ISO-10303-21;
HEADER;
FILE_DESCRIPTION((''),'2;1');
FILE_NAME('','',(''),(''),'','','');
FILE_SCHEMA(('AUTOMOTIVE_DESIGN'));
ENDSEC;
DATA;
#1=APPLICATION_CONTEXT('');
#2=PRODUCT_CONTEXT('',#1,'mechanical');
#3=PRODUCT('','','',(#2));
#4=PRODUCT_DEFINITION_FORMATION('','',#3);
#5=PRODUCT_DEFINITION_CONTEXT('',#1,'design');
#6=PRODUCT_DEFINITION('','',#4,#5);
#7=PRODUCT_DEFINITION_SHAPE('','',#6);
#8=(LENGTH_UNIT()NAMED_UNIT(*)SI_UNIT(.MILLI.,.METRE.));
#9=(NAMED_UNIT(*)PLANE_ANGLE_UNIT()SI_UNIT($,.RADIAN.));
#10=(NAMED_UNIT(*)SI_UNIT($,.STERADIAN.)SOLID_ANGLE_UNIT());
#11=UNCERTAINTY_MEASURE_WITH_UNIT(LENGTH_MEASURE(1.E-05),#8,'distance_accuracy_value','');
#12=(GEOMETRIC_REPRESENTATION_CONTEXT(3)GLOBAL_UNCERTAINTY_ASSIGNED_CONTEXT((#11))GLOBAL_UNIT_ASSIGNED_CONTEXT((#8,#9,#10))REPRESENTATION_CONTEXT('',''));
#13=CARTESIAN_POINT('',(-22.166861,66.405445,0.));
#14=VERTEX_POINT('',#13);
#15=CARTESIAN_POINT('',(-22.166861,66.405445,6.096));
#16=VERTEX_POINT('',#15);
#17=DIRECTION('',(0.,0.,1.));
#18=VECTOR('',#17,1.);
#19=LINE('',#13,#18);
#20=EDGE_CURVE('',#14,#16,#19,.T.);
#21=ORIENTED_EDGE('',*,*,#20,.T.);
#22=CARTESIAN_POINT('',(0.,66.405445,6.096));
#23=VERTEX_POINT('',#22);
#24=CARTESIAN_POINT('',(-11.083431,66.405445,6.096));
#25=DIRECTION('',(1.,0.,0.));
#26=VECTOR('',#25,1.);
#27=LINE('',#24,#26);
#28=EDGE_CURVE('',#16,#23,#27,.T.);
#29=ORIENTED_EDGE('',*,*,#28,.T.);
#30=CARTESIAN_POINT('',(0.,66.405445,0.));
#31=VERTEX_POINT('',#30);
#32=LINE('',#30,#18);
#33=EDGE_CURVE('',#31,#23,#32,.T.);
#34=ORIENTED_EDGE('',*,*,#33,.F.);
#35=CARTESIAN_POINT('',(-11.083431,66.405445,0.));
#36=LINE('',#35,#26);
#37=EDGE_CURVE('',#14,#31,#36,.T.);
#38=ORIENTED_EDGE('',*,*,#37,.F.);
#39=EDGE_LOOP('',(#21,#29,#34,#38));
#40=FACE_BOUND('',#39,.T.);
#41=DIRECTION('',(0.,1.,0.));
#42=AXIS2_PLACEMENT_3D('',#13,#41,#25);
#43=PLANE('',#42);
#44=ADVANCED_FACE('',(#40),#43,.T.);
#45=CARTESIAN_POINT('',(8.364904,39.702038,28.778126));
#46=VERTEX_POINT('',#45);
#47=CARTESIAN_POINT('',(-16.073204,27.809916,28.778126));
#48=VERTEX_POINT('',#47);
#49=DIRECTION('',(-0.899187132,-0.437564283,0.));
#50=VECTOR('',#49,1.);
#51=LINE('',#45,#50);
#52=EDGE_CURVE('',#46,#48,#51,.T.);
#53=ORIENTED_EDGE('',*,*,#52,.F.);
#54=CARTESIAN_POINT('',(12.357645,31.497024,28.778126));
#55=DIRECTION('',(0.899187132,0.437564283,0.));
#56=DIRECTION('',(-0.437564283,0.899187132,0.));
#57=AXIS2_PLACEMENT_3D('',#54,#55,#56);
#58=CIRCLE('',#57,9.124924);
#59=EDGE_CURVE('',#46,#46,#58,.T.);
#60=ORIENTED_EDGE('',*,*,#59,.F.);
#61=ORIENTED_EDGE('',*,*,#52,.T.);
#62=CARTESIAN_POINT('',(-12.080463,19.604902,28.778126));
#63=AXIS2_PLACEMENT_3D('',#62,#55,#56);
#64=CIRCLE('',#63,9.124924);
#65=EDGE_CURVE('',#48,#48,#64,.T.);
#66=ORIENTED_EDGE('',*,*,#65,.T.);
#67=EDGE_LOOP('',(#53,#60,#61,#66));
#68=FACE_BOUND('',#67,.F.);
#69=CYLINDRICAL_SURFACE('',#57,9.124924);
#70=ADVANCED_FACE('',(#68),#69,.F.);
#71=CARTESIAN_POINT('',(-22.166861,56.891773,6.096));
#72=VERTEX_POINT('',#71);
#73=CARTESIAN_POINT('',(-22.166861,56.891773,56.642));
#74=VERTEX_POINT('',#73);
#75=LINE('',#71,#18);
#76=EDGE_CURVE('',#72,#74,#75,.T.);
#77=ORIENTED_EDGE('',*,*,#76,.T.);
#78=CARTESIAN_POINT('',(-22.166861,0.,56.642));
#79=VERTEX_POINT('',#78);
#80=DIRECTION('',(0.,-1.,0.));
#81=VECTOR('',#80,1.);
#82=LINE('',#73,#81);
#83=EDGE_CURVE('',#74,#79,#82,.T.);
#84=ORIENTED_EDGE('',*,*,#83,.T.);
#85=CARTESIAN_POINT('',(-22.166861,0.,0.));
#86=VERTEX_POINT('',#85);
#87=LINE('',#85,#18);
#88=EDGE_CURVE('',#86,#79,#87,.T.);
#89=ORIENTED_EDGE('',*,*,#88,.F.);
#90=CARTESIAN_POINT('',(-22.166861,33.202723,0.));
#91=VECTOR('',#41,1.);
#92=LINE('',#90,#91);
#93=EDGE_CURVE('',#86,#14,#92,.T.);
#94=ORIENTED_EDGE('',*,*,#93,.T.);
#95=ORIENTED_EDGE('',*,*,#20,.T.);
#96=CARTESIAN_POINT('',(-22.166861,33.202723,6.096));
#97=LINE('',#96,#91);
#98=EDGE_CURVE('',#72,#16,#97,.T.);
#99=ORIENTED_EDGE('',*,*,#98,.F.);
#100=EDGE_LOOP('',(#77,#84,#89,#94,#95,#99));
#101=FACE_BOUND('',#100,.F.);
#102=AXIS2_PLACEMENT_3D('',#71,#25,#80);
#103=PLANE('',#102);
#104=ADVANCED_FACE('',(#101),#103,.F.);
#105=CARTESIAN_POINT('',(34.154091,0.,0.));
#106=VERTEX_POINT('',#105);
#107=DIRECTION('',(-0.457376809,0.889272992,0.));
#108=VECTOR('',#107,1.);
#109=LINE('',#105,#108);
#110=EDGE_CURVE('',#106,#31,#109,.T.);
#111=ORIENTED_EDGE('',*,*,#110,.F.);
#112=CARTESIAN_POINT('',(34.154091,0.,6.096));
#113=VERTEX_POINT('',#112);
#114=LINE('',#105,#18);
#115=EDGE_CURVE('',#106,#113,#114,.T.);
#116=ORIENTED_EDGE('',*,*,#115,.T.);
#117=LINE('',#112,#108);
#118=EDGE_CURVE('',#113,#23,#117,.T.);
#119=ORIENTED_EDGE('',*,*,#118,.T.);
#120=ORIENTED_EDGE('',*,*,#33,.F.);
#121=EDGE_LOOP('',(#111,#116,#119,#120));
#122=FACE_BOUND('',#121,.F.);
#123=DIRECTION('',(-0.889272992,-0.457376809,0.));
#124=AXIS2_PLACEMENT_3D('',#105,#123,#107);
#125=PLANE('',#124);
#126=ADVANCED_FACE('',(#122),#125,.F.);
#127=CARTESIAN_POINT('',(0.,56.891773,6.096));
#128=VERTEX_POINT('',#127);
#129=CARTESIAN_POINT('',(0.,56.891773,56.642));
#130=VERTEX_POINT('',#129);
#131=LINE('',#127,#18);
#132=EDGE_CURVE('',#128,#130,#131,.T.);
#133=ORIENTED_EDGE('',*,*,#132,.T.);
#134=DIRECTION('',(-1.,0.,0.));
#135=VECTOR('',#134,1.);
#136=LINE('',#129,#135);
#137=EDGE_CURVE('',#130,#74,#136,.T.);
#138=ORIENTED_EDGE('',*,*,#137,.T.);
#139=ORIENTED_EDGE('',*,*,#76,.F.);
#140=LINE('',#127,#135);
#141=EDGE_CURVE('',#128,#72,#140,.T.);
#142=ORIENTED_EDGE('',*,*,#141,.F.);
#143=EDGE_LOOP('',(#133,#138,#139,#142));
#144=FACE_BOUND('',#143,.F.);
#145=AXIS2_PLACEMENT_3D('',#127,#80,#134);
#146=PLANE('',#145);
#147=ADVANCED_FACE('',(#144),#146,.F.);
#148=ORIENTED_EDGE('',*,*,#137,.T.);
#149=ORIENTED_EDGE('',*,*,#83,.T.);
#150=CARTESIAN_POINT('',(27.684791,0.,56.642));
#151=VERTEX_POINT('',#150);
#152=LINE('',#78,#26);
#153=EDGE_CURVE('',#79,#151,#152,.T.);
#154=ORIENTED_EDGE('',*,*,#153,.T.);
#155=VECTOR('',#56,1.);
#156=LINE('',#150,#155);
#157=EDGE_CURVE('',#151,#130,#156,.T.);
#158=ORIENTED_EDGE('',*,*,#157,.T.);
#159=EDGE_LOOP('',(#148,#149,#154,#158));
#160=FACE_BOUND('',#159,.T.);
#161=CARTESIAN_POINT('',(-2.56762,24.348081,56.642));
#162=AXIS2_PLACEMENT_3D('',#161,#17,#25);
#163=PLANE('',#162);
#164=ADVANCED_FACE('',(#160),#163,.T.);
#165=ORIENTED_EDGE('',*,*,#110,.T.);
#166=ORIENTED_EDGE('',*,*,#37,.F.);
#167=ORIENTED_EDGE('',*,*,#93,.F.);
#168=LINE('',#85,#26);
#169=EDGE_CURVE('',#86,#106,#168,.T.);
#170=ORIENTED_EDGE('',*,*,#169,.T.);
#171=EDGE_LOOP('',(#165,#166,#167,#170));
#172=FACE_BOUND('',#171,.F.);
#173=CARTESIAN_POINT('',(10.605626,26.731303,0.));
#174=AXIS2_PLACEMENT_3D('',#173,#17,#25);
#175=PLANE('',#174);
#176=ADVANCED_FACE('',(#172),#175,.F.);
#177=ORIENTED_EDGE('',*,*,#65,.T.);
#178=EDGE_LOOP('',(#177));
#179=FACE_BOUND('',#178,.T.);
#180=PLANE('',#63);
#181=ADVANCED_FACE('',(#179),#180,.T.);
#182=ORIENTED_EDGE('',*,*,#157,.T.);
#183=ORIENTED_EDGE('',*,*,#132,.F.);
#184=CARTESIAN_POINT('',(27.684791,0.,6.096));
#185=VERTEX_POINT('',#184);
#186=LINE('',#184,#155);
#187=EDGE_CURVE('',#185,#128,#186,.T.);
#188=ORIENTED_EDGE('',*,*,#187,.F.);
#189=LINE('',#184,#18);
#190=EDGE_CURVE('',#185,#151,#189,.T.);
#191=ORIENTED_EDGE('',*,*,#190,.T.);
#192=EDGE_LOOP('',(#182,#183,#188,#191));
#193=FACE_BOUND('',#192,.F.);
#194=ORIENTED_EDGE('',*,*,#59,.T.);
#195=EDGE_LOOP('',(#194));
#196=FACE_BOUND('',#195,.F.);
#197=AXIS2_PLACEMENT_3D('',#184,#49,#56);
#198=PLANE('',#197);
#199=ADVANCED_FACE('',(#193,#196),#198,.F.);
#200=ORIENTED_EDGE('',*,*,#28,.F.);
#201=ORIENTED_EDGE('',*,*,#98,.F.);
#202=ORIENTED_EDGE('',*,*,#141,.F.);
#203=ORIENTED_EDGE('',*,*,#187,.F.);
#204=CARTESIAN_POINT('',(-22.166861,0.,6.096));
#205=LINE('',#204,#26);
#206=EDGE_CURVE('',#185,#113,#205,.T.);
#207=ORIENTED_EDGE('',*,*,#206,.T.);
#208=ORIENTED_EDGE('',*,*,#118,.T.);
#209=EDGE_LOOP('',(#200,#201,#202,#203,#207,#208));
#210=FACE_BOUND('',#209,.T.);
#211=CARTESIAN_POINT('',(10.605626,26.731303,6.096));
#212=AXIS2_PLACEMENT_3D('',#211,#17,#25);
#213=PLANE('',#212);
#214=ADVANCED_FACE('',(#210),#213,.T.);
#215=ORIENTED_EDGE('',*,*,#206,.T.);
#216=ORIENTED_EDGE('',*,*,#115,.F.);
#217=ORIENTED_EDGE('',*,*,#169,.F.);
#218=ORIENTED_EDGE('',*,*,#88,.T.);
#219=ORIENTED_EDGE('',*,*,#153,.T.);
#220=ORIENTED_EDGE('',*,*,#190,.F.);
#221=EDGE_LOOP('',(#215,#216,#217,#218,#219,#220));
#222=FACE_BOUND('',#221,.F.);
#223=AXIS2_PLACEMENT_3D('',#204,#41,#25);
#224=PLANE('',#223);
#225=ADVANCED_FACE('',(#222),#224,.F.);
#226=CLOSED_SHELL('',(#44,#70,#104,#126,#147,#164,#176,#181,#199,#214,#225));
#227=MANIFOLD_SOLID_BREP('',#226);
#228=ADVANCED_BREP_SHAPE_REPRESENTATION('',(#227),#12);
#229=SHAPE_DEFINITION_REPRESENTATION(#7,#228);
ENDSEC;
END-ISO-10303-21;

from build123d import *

# Parameters (mm, degrees)
F0_W     = 22.1668612212
F0_H     = 66.4054453373
F1_DEPTH = 6.096
F3_DEPTH = 50.546
F4_R     = 9.1249243662
F5_DEPTH = 27.178


with BuildPart() as f1:
    # F0 (on Top) → F1 (new body)
    with BuildSketch(Plane.XY):
        Polygon((0, 66.4054453373), (0, 0), (34.1540910304, 0), align=None)
        with Locations((-11.0834306106, 33.2027226686)):
            Rectangle(F0_W, F0_H)
    extrude(amount=F1_DEPTH)

    # F2 (on face) → F3 (join)
    with BuildSketch(Plane.XY.offset(6.096)):
        Polygon((0, 56.8917728961), (-22.1668612212, 56.8917728961), (-22.1668612212, 0), (27.6847910136, 0), align=None)
    extrude(amount=F3_DEPTH)

    # F4 (on face) → F5 (cut)
    with BuildSketch(Plane(origin=(22.3841916607, 10.892641178, 0), x_dir=(-0.4375642832, 0.8991871318, 0), z_dir=(0.8991871318, 0.4375642832, 0))):
        with Locations((22.9144543409, 28.7781264633)):
            Circle(F4_R)
    extrude(amount=-F5_DEPTH, mode=Mode.SUBTRACT)


solid = f1.part
